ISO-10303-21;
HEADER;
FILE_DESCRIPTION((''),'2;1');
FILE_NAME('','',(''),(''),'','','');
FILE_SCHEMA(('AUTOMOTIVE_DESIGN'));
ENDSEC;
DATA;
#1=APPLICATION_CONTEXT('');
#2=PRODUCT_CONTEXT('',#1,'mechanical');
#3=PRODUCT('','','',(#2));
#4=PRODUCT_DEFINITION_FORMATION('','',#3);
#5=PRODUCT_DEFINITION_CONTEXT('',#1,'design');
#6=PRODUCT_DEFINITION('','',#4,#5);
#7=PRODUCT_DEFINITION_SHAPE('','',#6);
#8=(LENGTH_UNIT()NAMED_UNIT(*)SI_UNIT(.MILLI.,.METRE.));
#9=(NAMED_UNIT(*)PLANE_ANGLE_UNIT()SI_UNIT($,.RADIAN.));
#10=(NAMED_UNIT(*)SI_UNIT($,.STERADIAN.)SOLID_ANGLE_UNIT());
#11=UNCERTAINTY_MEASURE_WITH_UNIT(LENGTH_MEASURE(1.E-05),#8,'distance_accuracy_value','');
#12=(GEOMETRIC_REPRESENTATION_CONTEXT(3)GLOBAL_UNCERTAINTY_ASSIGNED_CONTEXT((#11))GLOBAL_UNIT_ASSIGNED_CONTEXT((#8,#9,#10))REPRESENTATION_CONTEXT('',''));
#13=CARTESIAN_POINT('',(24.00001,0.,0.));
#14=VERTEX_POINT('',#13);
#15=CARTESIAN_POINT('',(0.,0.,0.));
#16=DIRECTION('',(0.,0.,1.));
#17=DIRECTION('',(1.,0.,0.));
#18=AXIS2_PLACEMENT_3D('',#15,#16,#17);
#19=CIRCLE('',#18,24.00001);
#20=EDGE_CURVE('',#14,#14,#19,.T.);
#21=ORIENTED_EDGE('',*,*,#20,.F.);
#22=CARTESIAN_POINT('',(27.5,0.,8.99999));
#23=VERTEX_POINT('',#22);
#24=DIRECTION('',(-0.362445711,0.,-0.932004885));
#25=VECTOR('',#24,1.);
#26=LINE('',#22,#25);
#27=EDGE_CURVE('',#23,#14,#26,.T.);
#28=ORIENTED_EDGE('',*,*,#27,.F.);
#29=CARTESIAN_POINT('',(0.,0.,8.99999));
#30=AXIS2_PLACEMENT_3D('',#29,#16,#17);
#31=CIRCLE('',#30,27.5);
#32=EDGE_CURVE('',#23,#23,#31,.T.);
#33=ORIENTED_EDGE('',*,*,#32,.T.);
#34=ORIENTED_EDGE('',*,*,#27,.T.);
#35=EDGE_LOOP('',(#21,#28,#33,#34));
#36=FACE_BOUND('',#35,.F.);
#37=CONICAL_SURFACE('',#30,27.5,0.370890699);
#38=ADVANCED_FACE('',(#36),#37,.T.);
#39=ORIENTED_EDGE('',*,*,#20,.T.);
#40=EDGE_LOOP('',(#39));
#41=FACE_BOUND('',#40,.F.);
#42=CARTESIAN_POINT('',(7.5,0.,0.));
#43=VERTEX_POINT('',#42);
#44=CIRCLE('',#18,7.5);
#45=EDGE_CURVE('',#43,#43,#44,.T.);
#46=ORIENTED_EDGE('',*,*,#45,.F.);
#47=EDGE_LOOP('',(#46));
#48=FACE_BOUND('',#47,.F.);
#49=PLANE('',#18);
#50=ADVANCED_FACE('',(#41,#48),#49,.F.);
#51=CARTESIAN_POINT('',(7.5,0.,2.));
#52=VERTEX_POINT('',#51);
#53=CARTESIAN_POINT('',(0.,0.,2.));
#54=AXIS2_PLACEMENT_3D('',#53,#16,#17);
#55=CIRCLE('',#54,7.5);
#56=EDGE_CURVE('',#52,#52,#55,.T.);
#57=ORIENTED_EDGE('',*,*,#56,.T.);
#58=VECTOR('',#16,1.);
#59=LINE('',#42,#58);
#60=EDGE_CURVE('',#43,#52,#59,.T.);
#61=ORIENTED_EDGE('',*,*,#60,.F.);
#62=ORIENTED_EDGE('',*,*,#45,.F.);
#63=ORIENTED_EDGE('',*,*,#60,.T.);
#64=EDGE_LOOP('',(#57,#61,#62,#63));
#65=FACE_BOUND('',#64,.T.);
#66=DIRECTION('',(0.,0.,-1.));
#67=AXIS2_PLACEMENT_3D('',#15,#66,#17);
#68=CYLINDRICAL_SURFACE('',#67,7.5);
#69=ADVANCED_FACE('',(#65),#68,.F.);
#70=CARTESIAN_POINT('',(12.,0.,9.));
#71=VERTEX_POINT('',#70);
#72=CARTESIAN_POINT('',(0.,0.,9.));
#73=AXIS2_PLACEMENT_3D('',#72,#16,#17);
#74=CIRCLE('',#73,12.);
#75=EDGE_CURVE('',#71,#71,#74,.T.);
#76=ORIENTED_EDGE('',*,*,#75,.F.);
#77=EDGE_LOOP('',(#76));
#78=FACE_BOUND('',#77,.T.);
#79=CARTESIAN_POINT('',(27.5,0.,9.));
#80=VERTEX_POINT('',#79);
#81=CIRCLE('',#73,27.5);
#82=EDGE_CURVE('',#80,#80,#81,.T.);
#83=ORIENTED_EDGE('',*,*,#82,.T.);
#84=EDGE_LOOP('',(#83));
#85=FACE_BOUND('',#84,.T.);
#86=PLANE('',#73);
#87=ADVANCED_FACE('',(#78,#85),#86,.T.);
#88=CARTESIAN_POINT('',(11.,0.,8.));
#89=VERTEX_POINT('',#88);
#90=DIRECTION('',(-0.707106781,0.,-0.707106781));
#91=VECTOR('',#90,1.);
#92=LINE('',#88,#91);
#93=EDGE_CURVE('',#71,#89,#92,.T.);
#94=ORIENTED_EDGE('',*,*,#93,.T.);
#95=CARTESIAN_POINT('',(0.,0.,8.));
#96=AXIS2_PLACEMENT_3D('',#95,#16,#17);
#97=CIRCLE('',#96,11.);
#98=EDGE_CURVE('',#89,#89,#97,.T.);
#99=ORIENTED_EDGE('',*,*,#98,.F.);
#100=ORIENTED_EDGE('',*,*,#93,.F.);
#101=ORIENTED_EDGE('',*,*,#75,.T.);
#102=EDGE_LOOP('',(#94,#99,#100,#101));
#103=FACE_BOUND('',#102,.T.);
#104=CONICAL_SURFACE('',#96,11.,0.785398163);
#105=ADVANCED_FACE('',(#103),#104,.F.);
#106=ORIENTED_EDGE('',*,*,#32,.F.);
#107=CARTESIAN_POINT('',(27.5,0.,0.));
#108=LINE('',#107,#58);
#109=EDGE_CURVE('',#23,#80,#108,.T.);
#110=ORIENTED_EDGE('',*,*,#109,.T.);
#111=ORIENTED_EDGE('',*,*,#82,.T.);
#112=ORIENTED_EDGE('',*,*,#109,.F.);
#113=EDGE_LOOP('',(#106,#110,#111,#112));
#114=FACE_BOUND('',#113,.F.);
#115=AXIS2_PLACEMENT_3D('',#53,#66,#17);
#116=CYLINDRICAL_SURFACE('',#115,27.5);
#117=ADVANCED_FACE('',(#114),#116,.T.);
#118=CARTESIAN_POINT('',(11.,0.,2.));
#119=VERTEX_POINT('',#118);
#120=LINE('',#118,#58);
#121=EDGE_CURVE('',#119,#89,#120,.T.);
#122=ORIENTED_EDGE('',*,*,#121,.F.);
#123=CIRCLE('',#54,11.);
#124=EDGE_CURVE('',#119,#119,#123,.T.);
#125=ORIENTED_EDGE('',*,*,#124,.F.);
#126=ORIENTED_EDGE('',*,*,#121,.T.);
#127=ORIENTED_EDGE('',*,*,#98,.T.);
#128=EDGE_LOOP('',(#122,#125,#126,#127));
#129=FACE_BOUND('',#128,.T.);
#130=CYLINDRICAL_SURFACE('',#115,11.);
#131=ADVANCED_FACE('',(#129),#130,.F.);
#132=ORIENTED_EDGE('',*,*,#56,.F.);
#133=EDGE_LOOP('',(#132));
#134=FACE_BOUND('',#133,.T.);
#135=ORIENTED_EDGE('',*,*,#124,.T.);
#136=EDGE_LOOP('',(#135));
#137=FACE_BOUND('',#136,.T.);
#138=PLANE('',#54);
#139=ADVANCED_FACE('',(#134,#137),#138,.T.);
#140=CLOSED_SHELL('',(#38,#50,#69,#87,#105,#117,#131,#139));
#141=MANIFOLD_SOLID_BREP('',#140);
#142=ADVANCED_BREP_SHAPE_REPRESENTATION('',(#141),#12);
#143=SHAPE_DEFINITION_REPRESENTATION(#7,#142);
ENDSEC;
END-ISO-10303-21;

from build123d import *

# Parameters (mm, degrees)
F0_R     = 27.5
F0_R_2   = 7.5
F1_DEPTH = 2
F2_R     = 27.5
F2_R_2   = 11
F3_DEPTH = 7
F4_SIZE2 = 3.49999
F4_SIZE  = 8.99999
F5_SIZE  = 1


# Not quite as in the source:
# - a fillet or chamfer is up to 0.001 mm smaller than in the source, because OpenCascade refuses the exact size


with BuildPart() as f1:
    # F0 (on Top) → F1 (new body)
    with BuildSketch(Plane.XY):
        Circle(F0_R)
        Circle(F0_R_2, mode=Mode.SUBTRACT)
    extrude(amount=F1_DEPTH)

    # F2 (on face) → F3 (join)
    with BuildSketch(Plane.XY.offset(2)):
        Circle(F2_R)
        Circle(F2_R_2, mode=Mode.SUBTRACT)
    extrude(amount=F3_DEPTH)

    # F4 (size 9 and 3.5 in the source; OpenCascade refuses exactly that, so slightly less here)
    f4_edges = [f1.edges().sort_by_distance(p)[0] for p in [
        (-27.5, 0, 0),
    ]]
    f4_side = f1.faces().sort_by_distance((-27.5, 0, 4.5))[0]
    chamfer(f4_edges, length=F4_SIZE, length2=F4_SIZE2, reference=f4_side)

    # F5
    f5_edges = [f1.edges().sort_by_distance(p)[0] for p in [
        (-11, 0, 9),
    ]]
    chamfer(f5_edges, length=F5_SIZE)


solid = f1.part
